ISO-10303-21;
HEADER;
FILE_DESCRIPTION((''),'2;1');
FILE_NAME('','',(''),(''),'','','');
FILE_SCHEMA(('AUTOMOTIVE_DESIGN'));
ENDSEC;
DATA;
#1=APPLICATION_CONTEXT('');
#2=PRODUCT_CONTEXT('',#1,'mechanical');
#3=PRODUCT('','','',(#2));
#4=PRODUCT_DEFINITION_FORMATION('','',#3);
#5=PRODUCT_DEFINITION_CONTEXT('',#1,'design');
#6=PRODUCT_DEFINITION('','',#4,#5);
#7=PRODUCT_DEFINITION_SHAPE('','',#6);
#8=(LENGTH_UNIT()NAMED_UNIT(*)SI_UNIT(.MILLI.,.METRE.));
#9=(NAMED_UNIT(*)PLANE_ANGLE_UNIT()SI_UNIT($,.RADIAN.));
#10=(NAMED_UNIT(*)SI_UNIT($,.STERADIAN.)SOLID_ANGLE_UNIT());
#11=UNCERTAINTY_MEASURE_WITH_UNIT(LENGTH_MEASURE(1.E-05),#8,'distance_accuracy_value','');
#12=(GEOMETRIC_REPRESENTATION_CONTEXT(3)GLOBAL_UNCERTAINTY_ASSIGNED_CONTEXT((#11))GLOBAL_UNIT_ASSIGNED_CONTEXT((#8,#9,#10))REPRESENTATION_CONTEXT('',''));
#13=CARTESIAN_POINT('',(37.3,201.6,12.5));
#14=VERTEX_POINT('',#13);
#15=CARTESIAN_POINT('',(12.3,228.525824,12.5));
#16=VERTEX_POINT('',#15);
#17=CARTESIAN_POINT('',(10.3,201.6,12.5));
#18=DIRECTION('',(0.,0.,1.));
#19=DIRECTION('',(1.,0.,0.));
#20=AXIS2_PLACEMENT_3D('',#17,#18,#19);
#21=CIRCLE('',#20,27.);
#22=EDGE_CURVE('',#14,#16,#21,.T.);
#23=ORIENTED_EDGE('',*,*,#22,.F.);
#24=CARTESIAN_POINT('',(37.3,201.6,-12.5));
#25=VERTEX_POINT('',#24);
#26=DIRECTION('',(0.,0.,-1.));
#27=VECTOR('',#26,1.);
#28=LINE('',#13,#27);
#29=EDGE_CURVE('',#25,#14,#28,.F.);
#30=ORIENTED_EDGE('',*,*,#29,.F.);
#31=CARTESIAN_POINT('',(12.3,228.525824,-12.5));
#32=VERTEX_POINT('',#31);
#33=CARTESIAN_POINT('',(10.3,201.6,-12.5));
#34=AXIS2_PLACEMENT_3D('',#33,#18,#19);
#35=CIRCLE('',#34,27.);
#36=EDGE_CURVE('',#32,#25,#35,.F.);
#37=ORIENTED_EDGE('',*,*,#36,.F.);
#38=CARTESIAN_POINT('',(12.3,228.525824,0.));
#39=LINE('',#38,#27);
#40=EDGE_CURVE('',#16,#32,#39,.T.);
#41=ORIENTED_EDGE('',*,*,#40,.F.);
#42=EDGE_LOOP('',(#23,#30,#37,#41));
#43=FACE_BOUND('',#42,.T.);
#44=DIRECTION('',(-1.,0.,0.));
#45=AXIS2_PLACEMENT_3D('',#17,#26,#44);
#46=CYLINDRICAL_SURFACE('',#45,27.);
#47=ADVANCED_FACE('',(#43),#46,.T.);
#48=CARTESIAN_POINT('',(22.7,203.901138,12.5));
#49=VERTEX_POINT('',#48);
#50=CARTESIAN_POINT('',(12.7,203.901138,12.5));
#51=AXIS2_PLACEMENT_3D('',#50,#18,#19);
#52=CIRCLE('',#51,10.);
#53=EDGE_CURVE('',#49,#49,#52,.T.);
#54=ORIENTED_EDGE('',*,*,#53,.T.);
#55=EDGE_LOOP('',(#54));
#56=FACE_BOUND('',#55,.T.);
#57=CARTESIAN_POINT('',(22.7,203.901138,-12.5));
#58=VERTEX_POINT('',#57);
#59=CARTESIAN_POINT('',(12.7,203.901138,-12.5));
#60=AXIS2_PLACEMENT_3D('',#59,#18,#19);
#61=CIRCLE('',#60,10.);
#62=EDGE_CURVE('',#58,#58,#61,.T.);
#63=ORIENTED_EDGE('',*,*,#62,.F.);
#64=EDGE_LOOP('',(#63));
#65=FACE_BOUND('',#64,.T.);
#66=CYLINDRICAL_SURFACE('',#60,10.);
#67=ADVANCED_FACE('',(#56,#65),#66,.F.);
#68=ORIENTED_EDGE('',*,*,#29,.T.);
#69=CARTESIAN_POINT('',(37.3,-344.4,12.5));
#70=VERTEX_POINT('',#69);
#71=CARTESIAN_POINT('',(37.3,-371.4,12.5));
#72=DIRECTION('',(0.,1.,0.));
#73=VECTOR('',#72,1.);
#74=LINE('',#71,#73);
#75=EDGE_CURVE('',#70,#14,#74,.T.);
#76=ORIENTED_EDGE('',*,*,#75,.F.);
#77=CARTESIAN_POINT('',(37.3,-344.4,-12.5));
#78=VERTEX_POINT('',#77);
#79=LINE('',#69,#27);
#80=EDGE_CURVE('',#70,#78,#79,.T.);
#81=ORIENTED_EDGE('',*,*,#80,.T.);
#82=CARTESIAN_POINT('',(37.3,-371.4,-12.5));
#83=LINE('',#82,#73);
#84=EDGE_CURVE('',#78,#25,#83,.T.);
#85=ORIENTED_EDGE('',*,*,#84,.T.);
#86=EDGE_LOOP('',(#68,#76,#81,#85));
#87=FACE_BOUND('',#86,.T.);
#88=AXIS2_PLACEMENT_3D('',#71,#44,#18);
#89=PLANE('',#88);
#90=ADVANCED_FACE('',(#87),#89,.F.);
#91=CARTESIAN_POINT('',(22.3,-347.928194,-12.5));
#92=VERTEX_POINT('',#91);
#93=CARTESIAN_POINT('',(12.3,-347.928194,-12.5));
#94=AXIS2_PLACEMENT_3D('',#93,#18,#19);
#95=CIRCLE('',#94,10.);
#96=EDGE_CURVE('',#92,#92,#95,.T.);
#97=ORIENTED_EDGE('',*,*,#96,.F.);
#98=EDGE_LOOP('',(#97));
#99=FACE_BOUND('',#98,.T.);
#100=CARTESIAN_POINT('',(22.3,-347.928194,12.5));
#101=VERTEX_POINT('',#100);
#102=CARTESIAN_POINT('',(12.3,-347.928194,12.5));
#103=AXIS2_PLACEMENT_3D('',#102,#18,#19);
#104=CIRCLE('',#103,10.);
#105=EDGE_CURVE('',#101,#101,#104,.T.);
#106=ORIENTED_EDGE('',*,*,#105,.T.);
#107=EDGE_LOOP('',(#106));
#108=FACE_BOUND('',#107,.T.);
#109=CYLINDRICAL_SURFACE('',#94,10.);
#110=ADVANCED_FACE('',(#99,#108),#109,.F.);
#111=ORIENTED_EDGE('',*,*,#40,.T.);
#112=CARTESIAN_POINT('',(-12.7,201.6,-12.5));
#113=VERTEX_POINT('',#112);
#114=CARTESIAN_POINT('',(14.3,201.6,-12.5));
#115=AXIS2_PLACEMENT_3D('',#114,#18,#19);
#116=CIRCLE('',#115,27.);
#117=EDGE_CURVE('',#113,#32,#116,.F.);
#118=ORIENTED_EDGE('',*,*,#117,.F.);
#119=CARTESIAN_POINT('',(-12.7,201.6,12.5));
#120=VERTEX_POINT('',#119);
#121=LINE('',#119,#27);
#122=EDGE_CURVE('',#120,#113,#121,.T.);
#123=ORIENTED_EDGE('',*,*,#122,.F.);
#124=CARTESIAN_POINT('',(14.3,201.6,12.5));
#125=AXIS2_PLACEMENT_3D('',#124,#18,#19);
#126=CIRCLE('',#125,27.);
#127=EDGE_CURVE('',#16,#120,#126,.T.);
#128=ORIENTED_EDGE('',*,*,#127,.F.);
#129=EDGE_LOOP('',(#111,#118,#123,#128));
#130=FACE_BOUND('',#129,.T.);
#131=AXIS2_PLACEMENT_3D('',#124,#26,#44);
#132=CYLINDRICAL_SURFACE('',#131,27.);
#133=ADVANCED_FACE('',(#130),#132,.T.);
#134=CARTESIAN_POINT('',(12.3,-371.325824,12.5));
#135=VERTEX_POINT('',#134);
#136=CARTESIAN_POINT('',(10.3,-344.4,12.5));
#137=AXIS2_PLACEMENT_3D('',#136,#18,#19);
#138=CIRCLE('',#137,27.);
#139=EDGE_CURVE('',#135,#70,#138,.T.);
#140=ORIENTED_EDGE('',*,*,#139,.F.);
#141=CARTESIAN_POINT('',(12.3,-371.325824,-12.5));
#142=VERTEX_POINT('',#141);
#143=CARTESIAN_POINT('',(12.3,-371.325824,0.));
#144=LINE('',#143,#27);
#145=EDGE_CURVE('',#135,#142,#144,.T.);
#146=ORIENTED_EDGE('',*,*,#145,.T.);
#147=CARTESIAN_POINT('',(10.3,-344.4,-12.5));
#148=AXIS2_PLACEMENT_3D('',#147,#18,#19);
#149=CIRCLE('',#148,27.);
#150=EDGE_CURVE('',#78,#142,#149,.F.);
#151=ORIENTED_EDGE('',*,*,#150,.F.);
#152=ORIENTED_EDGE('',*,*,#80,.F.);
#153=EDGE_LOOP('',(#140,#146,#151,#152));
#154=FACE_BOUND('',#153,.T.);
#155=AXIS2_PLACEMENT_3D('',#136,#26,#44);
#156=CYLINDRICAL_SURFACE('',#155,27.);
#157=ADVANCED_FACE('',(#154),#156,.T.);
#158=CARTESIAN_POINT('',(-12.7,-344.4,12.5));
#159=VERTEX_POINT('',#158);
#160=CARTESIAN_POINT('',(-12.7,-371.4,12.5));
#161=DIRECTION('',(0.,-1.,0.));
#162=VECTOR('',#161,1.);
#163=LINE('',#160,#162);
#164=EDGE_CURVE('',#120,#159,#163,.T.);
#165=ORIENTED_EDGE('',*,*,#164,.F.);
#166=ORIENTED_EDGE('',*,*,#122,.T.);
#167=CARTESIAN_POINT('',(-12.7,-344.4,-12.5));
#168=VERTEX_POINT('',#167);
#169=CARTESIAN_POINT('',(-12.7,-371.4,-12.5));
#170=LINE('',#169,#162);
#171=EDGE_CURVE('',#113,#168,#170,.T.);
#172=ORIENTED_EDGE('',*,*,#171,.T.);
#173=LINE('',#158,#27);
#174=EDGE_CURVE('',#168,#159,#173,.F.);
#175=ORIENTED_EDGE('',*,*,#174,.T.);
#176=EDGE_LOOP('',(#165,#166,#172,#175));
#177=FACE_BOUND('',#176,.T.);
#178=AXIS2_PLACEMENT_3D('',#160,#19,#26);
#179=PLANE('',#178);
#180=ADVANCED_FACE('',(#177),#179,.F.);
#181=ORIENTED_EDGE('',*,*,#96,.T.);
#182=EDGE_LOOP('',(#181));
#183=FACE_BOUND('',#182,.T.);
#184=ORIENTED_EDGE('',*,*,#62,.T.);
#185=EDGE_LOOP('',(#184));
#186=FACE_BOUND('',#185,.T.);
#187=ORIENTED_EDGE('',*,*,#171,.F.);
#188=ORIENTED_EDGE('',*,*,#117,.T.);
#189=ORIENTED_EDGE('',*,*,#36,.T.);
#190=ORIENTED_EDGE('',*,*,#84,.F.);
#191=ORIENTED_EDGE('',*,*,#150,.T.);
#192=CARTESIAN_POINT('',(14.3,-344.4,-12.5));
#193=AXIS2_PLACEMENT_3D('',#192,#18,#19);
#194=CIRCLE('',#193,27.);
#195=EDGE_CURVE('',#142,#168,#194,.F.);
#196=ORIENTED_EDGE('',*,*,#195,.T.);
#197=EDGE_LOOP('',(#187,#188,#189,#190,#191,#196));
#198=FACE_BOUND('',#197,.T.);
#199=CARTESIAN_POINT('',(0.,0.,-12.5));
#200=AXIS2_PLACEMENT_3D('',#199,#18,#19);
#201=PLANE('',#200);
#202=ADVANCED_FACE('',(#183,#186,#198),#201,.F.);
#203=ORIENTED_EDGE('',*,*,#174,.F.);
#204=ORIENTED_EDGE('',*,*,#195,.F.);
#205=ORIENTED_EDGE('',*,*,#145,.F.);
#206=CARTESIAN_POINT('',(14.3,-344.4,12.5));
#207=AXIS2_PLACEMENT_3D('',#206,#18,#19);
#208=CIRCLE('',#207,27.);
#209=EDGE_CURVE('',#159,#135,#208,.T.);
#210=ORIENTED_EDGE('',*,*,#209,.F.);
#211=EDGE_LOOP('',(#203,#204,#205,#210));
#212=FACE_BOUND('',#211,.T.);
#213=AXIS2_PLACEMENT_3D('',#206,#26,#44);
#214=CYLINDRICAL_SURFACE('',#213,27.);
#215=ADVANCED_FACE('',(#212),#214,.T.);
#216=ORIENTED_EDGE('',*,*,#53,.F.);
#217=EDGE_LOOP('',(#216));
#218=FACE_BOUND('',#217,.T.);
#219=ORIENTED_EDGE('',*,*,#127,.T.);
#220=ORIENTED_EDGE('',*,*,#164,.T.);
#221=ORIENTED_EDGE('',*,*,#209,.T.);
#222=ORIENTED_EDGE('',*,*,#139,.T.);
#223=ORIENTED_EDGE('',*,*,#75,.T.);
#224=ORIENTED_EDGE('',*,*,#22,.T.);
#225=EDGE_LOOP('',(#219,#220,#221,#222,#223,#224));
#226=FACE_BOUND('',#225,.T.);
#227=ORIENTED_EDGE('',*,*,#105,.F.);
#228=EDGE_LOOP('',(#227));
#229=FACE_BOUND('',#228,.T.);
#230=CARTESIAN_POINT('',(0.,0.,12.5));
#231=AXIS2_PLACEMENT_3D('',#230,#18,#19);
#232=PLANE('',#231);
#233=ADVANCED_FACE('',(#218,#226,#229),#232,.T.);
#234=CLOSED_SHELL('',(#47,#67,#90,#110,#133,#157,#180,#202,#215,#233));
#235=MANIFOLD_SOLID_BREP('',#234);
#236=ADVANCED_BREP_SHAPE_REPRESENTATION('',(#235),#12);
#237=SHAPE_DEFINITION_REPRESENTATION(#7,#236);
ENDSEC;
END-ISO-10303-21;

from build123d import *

# Parameters (mm, degrees)
SKETCH7_W           = 50
SKETCH7_H           = 600
BOSS_EXTRUDE1_DEPTH = 12.5
FILLET1_R           = 27
SKETCH8_R           = 10
CUT_EXTRUDE1_DEPTH  = 375.030958071
SKETCH9_R           = 10
CUT_EXTRUDE2_DEPTH  = 375.030958071


with BuildPart() as part:
    # Sketch7 → Boss-Extrude1 (new, symmetric)
    with BuildSketch(Plane.XY):
        with Locations((12.3, -71.4)):
            Rectangle(SKETCH7_W, SKETCH7_H)
    extrude(amount=BOSS_EXTRUDE1_DEPTH, both=True)

    # Fillet1
    # the kernel refuses this fillet: 27 mm, written as the material it takes off along each edge
    with BuildSketch(Plane(origin=(37.3, -371.4, -80), x_dir=(-1, 0, 0), z_dir=(0, 0, 1)), Plane(origin=(-12.7, -371.4, 80), x_dir=(1, 0, 0), z_dir=(0, 0, -1))) as fillet1_piece_1:
        with BuildLine():
            CenterArc((FILLET1_R, -FILLET1_R), FILLET1_R, 90, 90)
            Line((0, -FILLET1_R), (0, 0))
            Line((0, 0), (FILLET1_R, 0))
        make_face()
    extrude(amount=160, mode=Mode.SUBTRACT)
    with BuildSketch(Plane(origin=(-12.7, 228.6, 80), x_dir=(1, 0, 0), z_dir=(0, 0, -1)), Plane(origin=(37.3, 228.6, -80), x_dir=(-1, 0, 0), z_dir=(0, 0, 1))) as fillet1_piece_2:
        with BuildLine():
            CenterArc((FILLET1_R, FILLET1_R), FILLET1_R, 180, 90)
            Line((0, FILLET1_R), (0, 0))
            Line((0, 0), (FILLET1_R, 0))
        make_face()
    extrude(amount=160, mode=Mode.SUBTRACT)

    # Sketch8 → Cut-Extrude1 (cut, through all)
    with BuildSketch(Plane.XY.offset(12.5)):
        with Locations((12.7, 203.901138173)):
            Circle(SKETCH8_R)
    extrude(amount=-CUT_EXTRUDE1_DEPTH, mode=Mode.SUBTRACT)

    # Sketch9 → Cut-Extrude2 (cut, through all)
    with BuildSketch(Plane.XY.offset(12.5)):
        with Locations((12.3, -347.928194148)):
            Circle(SKETCH9_R)
    extrude(amount=-CUT_EXTRUDE2_DEPTH, mode=Mode.SUBTRACT)


solid = part.part
